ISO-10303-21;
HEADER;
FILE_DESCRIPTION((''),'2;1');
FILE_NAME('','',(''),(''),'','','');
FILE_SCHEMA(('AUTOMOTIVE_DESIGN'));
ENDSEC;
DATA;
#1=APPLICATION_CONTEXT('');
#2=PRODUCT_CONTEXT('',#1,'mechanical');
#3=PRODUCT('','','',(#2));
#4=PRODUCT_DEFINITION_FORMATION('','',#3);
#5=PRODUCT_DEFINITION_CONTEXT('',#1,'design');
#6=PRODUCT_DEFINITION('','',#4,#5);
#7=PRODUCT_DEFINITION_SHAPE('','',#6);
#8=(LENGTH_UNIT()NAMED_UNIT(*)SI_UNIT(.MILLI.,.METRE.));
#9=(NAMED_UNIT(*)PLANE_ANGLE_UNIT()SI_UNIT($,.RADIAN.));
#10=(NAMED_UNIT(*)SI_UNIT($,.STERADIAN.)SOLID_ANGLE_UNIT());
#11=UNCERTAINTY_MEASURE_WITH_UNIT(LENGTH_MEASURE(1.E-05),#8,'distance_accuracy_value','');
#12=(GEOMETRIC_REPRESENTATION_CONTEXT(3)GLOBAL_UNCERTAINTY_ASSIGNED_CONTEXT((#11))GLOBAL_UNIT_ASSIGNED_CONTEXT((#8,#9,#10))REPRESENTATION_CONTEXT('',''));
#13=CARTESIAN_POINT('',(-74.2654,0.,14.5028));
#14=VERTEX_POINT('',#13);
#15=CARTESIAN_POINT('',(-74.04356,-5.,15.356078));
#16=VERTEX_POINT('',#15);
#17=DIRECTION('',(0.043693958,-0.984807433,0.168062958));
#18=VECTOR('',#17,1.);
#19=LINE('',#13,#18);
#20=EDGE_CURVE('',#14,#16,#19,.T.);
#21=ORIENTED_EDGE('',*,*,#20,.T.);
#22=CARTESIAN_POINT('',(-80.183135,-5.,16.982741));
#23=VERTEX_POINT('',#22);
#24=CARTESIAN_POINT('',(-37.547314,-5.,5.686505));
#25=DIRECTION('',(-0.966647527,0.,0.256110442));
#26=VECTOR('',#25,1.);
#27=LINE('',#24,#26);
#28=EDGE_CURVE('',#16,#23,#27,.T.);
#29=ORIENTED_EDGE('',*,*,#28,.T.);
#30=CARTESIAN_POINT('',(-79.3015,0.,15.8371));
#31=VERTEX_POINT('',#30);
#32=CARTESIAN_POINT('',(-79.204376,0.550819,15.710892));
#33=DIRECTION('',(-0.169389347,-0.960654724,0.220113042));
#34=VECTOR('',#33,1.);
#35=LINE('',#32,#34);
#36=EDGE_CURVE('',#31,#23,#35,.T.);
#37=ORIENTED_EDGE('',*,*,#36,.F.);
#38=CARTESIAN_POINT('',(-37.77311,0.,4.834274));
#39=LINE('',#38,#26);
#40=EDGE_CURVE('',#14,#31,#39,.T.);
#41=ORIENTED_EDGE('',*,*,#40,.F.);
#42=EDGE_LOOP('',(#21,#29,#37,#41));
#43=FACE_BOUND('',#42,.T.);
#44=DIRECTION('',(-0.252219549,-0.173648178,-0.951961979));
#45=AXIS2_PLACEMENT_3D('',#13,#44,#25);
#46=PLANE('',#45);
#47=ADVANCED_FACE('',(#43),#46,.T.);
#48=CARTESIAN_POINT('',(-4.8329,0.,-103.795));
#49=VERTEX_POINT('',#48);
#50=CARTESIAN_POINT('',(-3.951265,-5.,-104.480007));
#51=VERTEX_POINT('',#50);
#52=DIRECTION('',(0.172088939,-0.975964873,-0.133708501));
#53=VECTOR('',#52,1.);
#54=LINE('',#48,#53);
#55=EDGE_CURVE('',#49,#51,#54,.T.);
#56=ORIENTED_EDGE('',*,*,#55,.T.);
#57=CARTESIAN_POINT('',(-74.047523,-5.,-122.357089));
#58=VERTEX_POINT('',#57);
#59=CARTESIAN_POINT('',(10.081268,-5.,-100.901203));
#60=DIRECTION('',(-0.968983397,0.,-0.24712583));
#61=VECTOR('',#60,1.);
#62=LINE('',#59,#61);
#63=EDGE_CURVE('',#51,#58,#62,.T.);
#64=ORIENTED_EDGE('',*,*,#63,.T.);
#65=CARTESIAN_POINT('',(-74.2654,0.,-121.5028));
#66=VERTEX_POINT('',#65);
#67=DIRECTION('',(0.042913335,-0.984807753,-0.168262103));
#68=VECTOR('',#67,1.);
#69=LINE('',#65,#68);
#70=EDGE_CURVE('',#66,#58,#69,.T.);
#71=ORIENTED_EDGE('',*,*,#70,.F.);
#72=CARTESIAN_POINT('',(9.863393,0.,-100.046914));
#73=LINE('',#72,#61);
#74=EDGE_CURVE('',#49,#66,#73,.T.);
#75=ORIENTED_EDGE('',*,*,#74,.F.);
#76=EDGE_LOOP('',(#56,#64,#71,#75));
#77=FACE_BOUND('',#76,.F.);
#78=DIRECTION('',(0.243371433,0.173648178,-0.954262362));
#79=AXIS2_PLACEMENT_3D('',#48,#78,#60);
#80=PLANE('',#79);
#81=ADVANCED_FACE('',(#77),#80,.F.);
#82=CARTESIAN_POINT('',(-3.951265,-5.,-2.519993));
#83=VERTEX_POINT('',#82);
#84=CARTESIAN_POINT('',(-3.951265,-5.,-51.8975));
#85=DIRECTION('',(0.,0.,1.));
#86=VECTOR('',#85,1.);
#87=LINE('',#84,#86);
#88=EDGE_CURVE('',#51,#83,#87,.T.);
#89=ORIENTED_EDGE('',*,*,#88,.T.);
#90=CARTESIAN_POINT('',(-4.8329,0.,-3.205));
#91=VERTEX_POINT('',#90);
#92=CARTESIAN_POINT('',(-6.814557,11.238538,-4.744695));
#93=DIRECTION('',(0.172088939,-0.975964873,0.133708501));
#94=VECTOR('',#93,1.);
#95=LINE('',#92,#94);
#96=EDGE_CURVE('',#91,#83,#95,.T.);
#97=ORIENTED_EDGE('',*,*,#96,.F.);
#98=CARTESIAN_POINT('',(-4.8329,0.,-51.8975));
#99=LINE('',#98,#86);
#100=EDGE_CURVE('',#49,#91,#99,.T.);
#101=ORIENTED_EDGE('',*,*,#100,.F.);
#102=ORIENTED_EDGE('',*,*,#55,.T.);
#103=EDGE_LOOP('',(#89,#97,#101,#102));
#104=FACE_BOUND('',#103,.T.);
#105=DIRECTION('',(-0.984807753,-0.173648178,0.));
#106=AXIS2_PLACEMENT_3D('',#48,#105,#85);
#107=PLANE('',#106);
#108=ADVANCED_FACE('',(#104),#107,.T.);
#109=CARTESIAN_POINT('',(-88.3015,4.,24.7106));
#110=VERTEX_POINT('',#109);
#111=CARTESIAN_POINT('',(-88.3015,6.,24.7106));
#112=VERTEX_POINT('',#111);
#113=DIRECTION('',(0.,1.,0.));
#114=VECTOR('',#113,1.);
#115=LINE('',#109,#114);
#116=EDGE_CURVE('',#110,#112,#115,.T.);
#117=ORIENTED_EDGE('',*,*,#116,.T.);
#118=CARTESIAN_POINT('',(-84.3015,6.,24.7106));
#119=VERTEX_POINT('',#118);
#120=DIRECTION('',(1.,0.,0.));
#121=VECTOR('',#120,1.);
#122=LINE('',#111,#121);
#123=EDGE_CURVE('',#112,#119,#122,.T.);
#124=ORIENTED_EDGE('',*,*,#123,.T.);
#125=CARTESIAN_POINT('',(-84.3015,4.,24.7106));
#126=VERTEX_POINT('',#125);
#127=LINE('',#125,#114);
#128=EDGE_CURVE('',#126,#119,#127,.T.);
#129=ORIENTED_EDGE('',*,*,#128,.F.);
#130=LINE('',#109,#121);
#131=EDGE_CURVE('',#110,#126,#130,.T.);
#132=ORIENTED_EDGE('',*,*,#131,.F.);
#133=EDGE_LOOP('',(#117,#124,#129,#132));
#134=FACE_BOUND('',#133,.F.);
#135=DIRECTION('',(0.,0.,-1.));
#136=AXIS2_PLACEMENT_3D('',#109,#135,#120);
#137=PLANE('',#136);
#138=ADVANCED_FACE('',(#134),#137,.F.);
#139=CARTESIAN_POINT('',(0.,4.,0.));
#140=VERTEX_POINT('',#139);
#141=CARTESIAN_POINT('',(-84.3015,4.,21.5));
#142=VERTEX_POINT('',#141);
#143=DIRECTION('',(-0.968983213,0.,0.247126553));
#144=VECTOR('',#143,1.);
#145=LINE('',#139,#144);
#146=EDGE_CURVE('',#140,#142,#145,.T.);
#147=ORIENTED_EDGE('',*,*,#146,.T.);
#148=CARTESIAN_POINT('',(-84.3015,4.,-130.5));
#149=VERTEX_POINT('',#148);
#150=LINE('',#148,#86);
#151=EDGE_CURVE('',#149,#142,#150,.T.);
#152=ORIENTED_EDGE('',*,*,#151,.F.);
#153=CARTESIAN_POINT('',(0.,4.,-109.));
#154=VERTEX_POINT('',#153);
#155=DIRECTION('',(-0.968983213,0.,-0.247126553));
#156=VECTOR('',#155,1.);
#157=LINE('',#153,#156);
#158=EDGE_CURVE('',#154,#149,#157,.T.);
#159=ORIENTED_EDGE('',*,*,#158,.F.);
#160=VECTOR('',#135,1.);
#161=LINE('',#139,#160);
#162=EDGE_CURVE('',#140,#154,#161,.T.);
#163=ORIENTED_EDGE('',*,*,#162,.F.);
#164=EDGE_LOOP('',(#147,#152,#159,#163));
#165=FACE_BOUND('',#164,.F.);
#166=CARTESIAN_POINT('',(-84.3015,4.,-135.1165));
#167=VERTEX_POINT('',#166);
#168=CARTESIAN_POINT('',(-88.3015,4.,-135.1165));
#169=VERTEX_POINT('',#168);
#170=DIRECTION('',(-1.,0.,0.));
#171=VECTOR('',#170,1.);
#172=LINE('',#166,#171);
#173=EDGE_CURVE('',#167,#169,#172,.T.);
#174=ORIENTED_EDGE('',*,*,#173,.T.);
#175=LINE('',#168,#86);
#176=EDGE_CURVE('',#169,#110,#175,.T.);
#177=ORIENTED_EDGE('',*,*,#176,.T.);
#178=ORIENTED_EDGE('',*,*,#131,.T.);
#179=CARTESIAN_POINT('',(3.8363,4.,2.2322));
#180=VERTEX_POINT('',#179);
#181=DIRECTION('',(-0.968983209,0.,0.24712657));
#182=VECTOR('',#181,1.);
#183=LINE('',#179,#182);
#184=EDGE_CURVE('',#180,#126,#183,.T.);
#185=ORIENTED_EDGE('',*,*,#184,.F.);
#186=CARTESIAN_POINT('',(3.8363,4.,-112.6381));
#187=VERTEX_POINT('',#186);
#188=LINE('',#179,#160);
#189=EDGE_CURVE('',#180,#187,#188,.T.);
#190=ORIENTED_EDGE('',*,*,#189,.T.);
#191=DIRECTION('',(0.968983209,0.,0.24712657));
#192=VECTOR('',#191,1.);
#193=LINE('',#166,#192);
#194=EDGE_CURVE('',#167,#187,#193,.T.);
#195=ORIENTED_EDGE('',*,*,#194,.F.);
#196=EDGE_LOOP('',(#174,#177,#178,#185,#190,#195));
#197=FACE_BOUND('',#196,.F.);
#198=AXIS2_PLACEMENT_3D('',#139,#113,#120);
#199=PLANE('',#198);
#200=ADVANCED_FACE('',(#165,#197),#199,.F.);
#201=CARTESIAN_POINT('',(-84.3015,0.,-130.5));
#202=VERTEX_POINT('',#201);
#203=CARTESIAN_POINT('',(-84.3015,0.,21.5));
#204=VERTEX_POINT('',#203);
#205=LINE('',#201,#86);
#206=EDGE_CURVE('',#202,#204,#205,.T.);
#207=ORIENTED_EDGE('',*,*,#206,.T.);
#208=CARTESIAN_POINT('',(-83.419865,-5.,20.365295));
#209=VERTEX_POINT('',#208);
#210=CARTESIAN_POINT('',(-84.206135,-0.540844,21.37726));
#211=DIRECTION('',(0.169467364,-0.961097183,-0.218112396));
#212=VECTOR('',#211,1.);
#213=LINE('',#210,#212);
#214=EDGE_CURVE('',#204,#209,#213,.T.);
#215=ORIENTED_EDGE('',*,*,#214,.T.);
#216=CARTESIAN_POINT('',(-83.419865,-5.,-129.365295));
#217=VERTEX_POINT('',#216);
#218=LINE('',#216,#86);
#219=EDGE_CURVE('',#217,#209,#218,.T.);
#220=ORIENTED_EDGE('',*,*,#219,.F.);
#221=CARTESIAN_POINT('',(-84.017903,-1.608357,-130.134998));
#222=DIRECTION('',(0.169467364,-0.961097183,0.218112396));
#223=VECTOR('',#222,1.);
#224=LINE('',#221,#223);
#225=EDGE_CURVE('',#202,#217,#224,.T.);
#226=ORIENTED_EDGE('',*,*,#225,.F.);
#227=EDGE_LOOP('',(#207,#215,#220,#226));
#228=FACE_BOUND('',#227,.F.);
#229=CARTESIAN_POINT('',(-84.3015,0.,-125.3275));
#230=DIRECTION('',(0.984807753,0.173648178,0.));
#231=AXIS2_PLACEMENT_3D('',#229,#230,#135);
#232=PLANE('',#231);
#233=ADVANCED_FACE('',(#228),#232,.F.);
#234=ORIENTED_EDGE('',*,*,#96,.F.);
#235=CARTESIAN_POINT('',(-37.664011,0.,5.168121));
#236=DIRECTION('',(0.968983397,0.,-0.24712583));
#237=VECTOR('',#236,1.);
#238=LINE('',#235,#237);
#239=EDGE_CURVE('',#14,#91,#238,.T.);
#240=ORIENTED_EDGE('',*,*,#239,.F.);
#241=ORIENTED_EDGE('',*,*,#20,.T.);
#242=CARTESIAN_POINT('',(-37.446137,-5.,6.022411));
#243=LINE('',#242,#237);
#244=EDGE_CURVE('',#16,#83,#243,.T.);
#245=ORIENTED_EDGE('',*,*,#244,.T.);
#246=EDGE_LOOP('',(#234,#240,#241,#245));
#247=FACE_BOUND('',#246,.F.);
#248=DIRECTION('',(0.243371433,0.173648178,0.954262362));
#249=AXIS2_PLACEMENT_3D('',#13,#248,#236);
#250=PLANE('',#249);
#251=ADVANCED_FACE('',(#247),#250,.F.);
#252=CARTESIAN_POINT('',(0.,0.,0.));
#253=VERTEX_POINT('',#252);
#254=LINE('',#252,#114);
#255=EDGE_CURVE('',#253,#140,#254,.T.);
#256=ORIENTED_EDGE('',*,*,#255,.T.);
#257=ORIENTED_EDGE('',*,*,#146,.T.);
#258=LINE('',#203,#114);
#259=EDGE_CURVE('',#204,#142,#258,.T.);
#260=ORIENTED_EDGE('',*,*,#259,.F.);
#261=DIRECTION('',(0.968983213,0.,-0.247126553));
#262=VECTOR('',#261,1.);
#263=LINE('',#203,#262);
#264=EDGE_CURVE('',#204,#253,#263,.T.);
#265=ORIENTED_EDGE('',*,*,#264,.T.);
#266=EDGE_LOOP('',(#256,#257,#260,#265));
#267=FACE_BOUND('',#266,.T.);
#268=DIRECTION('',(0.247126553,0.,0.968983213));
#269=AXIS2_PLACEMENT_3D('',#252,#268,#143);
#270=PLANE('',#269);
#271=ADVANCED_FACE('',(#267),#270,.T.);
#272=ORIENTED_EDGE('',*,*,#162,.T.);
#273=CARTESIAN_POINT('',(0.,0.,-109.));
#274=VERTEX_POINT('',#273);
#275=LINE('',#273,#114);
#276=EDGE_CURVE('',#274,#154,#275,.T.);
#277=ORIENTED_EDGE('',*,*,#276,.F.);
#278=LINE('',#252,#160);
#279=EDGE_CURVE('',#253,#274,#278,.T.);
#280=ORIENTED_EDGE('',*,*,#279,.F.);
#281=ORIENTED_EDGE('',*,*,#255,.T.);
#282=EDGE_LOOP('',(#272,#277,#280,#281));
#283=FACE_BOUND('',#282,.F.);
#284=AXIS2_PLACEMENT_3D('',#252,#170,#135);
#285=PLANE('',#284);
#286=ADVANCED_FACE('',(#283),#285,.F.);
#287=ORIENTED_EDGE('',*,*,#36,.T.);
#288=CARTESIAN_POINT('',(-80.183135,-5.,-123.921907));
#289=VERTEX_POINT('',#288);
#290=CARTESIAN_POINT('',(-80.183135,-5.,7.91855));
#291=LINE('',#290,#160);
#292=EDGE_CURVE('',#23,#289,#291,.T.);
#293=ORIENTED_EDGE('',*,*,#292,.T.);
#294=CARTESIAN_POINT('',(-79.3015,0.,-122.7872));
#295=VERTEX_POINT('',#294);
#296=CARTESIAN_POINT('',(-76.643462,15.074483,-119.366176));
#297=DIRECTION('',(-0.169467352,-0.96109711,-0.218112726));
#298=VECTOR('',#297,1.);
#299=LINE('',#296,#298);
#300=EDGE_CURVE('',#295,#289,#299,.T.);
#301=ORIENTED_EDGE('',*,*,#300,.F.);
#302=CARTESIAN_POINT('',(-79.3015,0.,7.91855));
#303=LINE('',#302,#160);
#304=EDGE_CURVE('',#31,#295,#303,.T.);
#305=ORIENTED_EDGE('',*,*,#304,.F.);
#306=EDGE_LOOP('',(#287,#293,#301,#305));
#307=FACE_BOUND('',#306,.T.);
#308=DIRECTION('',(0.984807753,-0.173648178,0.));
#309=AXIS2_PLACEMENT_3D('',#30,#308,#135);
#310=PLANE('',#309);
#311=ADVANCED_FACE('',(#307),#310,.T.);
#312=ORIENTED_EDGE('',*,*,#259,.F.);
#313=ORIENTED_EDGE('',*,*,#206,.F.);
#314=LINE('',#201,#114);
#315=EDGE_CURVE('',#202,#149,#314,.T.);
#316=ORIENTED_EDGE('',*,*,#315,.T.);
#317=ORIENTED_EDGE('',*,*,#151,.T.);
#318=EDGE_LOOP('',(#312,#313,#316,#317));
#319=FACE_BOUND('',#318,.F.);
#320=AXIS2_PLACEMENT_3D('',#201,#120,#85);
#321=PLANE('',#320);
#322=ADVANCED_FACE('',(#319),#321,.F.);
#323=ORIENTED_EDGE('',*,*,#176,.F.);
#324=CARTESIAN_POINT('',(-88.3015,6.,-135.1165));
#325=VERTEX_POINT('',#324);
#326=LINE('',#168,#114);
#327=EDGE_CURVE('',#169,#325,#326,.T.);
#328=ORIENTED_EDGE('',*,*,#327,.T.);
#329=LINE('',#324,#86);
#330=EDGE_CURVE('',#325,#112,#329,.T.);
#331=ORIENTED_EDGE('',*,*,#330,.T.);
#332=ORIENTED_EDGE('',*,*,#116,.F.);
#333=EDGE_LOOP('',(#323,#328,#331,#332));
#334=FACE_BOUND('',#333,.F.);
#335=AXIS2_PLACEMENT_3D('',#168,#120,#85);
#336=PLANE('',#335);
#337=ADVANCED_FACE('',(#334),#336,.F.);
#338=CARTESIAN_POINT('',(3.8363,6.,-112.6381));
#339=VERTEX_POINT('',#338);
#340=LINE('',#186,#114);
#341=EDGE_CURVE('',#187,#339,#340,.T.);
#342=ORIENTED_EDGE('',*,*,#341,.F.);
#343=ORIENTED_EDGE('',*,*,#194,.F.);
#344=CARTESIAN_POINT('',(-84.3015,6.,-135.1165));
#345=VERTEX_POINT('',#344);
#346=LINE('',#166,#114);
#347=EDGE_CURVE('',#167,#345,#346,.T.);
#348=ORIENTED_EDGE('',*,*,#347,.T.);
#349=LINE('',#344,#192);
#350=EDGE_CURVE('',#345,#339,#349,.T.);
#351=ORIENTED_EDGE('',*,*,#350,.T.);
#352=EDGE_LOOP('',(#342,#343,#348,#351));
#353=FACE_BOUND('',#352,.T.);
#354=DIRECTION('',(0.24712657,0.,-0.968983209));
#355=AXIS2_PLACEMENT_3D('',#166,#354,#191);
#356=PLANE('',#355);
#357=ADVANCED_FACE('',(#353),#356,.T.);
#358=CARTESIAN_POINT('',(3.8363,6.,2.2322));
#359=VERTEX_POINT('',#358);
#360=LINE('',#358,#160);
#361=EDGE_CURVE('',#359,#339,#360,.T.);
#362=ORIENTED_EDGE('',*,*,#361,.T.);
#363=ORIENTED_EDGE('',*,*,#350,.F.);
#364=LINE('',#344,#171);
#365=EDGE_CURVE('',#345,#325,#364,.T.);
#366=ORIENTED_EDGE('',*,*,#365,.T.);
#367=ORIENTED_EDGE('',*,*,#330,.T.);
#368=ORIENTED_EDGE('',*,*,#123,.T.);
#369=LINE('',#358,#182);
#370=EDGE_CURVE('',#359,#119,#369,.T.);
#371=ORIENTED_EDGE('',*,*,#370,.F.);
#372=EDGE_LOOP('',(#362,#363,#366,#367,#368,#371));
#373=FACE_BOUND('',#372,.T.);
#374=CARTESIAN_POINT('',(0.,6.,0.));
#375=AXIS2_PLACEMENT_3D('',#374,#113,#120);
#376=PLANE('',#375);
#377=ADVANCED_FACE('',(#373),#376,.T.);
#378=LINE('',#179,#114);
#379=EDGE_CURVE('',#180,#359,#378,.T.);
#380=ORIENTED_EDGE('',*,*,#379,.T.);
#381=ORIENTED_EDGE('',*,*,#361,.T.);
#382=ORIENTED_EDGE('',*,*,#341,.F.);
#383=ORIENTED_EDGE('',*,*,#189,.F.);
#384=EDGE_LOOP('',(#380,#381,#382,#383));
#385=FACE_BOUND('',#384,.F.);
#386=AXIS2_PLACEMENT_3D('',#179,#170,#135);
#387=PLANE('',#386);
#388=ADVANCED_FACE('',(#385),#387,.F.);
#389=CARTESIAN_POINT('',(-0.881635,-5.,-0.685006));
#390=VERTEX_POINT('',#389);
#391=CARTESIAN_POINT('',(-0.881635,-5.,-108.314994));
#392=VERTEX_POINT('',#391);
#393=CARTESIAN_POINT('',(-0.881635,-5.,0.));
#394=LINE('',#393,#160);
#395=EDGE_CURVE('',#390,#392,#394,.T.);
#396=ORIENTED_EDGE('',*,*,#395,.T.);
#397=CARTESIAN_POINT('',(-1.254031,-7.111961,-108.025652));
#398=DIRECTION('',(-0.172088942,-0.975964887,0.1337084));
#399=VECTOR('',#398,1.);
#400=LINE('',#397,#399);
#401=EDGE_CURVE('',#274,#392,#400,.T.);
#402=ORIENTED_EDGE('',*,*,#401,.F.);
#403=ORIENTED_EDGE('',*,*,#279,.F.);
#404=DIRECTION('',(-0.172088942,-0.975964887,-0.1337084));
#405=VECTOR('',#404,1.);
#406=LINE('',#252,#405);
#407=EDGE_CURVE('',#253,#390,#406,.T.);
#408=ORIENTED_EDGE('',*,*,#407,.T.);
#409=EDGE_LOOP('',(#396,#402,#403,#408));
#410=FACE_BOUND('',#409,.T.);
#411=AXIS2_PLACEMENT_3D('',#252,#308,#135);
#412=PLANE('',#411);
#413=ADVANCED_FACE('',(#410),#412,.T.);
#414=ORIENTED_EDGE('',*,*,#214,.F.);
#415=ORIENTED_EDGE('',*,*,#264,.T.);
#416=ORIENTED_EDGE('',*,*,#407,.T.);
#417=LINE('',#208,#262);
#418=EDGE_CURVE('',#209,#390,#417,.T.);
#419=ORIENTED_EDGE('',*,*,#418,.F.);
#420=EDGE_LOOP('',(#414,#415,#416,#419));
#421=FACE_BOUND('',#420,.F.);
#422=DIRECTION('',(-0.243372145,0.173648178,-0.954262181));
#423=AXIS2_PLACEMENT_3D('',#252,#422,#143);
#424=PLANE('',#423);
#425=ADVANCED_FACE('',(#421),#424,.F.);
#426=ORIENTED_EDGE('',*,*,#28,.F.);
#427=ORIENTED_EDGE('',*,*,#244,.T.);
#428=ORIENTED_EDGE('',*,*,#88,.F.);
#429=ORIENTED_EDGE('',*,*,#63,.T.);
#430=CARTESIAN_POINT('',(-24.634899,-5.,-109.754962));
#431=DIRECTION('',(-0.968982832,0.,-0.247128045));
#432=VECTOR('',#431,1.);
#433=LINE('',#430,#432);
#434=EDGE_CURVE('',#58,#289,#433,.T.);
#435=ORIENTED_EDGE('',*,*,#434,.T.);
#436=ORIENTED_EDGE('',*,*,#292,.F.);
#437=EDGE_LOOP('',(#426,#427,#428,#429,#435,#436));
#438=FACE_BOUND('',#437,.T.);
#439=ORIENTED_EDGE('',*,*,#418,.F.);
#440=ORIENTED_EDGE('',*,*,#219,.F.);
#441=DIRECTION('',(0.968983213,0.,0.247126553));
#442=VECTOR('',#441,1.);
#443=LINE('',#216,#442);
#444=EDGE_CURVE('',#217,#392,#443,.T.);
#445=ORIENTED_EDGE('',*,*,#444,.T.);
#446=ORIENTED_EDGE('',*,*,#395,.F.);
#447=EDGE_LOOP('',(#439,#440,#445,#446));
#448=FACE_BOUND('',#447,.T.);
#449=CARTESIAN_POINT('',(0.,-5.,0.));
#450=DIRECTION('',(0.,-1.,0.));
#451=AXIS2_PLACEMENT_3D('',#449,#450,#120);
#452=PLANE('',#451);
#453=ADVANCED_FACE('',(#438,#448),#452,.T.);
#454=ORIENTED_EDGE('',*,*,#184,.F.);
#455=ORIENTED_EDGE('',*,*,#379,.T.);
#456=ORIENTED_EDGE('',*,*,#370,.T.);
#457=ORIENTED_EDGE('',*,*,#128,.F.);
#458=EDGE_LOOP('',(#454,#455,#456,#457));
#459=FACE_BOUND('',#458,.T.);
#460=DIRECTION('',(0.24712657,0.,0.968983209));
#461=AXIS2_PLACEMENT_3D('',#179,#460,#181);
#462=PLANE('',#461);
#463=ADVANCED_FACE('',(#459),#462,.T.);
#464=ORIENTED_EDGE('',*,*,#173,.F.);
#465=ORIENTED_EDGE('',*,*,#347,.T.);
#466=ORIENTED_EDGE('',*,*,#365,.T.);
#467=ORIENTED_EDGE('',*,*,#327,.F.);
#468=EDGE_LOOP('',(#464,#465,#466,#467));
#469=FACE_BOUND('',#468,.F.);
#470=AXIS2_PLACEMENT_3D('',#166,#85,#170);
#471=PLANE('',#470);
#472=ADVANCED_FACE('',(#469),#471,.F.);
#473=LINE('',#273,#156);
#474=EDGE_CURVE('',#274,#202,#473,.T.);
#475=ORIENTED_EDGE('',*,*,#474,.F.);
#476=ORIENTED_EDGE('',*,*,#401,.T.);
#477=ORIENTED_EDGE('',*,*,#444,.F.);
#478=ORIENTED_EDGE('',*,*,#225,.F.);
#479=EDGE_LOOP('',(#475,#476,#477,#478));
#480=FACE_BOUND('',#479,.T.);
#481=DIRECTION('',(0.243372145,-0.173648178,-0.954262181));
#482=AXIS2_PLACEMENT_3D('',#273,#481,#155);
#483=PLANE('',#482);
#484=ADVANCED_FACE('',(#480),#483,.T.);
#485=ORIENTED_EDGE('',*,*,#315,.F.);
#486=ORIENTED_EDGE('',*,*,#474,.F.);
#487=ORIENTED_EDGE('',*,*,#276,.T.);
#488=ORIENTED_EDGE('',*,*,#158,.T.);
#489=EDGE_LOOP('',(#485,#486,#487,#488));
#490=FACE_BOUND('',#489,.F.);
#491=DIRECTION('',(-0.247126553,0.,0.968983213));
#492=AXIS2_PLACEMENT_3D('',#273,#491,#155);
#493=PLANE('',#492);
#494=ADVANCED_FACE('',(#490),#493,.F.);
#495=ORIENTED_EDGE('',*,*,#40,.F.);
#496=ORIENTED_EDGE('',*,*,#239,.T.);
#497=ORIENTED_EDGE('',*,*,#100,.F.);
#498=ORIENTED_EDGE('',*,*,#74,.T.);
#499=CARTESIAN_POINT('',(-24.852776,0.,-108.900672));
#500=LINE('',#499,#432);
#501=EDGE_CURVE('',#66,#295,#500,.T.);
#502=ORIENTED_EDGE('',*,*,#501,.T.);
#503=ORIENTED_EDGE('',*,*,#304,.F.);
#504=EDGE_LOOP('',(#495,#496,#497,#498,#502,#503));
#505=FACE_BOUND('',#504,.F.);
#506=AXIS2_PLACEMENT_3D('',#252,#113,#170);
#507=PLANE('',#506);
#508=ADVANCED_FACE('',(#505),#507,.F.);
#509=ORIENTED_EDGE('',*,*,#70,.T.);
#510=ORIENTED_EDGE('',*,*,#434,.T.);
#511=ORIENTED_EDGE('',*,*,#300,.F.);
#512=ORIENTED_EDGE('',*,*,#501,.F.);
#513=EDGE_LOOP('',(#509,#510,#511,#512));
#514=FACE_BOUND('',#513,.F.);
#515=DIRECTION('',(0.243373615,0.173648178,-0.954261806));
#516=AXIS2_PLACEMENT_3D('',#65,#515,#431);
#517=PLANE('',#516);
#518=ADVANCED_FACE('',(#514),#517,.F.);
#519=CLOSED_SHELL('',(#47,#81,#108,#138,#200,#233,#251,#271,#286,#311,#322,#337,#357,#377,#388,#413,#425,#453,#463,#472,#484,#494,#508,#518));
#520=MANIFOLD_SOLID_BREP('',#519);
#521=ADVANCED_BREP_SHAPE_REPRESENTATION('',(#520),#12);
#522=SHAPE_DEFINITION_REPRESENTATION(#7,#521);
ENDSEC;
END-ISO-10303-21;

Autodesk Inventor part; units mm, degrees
ref_plane "YZ Plane" through (0, 0, 0) normal (1, 0, 0) x (0, 1, 0)
ref_plane "XZ Plane" through (0, 0, 0) normal (0, 1, 0) x (-1, 0, 0)
ref_plane "XY Plane" through (0, 0, 0) normal (0, 0, 1) x (1, 0, 0)
sketch "Sketch1" plane through (0, 0, 0) normal (0, 1, 0) x (-1, 0, 0)
  line L0 (0, 0) -> (0, -109)
  line L1 (0, -109) -> (84.3015, -130.5)
  line L2 (84.3015, -130.5) -> (84.3015, 21.5)
  line L3 (0, 0) -> (84.3015, 21.5)
  dimension "d0" = 109
  dimension "d3" = 87
  dimension "d4" = 152
  dimension "d5" = 87
extrude "Extrusion1" add sketch "Sketch1" along normal blind 4
sketch "Sketch2" plane through (0, 0, 0) normal (0, -1, 0) x (1, 0, 0)
  line L0 (0, 0) -> (0, -109) projected
  line L1 (0, -109) -> (-5, -109)
  line L2 (-4.8329, -103.795) -> (-4.8329, -3.205)
  line L3 (-5, 0) -> (0, 0)
  line L4 (0, 0) -> (0, -109)
  line L5 (0, -109) -> (-84.3015, -130.5) projected
  line L6 (-84.3015, -130.5) -> (-74.4446, -130.5)
  line L7 (-79.3015, 21.5) -> (-84.3015, 21.5)
  line L8 (-84.3015, 21.5) -> (-84.3015, -130.5)
  line L9 (-84.3015, -130.5) -> (0, -109)
  line L10 (0, -109) -> (-1.2356, -104.1551)
  line L11 (-85.5402, -125.6434) -> (-84.3015, -130.5)
  line L12 (-84.3015, -130.5) -> (-84.3015, 21.5) projected
  line L13 (0, 0) -> (-84.3015, 21.5)
  line L14 (-84.3015, 21.5) -> (-85.5372, 16.6551)
  line L15 (-1.4353, -5.628) -> (0, 0)
  line L16 (-74.4446, -130.5) -> (-74.4446, -127.9861)
  line L17 (-4.8329, -103.795) -> (-74.2654, -121.5028)
  line L18 (-84.3015, -125.3275) -> (-85.5402, -125.6434)
  line L19 (-85.5372, 16.6551) -> (-84.3015, 16.34)
  line L20 (-74.2654, 14.5028) -> (-4.8329, -3.205)
  line L21 (-79.3015, 20.2248) -> (-79.3015, 21.5)
  line L22 (-79.3015, 15.8371) -> (-79.3015, -122.7872)
  line L23 (-74.2654, -121.5028) -> (-79.3015, -122.7872)
  line L24 (-74.2654, 14.5028) -> (-79.3015, 15.8371)
  dimension "d9" = 5
  dimension "d10" = 5
  dimension "d11" = 5
  dimension "d12" = 5
extrude "Extrusion2" add sketch "Sketch2" along normal blind 5 draft -10 contours L0 L5 L8 L13
sketch "Sketch3" plane through (0, 4, 0) normal (0, 1, 0) x (1, 0, 0)
  line L0 (0, 34.4959) -> (3, 34.4959) construction
  line L1 (3.8363, -2.2322) -> (3.8363, 112.6381)
  line L2 (-79.382, 43.4403) -> (-76.382, 43.4403) construction
  line L3 (-84.3015, 130.5) -> (-84.3015, -21.5) projected
  line L4 (-84.3015, 135.1165) -> (3.8363, 112.6381)
  line L5 (0, 109) -> (-84.3015, 130.5) projected
  line L6 (3.8363, -2.2322) -> (-84.3015, -24.7106)
  line L7 (-84.3015, -21.5) -> (0, 0) projected
  line L8 (-84.3015, 130.5) -> (-84.3015, 135.1165)
  line L9 (-84.3015, -21.5) -> (-84.3015, -24.7106)
  line L10 (-84.3015, 135.1165) -> (-88.3015, 135.1165)
  line L11 (-88.3015, 135.1165) -> (-88.3015, -24.7106)
  line L12 (-88.3015, -24.7106) -> (-84.3015, -24.7106)
  line L13 (-84.3015, -24.7106) -> (-84.3015, 135.1165)
  dimension "d24" = 4
extrude "Extrusion3" add sketch "Sketch3" along normal blind 2
properties part number "FoodHopperLid"
